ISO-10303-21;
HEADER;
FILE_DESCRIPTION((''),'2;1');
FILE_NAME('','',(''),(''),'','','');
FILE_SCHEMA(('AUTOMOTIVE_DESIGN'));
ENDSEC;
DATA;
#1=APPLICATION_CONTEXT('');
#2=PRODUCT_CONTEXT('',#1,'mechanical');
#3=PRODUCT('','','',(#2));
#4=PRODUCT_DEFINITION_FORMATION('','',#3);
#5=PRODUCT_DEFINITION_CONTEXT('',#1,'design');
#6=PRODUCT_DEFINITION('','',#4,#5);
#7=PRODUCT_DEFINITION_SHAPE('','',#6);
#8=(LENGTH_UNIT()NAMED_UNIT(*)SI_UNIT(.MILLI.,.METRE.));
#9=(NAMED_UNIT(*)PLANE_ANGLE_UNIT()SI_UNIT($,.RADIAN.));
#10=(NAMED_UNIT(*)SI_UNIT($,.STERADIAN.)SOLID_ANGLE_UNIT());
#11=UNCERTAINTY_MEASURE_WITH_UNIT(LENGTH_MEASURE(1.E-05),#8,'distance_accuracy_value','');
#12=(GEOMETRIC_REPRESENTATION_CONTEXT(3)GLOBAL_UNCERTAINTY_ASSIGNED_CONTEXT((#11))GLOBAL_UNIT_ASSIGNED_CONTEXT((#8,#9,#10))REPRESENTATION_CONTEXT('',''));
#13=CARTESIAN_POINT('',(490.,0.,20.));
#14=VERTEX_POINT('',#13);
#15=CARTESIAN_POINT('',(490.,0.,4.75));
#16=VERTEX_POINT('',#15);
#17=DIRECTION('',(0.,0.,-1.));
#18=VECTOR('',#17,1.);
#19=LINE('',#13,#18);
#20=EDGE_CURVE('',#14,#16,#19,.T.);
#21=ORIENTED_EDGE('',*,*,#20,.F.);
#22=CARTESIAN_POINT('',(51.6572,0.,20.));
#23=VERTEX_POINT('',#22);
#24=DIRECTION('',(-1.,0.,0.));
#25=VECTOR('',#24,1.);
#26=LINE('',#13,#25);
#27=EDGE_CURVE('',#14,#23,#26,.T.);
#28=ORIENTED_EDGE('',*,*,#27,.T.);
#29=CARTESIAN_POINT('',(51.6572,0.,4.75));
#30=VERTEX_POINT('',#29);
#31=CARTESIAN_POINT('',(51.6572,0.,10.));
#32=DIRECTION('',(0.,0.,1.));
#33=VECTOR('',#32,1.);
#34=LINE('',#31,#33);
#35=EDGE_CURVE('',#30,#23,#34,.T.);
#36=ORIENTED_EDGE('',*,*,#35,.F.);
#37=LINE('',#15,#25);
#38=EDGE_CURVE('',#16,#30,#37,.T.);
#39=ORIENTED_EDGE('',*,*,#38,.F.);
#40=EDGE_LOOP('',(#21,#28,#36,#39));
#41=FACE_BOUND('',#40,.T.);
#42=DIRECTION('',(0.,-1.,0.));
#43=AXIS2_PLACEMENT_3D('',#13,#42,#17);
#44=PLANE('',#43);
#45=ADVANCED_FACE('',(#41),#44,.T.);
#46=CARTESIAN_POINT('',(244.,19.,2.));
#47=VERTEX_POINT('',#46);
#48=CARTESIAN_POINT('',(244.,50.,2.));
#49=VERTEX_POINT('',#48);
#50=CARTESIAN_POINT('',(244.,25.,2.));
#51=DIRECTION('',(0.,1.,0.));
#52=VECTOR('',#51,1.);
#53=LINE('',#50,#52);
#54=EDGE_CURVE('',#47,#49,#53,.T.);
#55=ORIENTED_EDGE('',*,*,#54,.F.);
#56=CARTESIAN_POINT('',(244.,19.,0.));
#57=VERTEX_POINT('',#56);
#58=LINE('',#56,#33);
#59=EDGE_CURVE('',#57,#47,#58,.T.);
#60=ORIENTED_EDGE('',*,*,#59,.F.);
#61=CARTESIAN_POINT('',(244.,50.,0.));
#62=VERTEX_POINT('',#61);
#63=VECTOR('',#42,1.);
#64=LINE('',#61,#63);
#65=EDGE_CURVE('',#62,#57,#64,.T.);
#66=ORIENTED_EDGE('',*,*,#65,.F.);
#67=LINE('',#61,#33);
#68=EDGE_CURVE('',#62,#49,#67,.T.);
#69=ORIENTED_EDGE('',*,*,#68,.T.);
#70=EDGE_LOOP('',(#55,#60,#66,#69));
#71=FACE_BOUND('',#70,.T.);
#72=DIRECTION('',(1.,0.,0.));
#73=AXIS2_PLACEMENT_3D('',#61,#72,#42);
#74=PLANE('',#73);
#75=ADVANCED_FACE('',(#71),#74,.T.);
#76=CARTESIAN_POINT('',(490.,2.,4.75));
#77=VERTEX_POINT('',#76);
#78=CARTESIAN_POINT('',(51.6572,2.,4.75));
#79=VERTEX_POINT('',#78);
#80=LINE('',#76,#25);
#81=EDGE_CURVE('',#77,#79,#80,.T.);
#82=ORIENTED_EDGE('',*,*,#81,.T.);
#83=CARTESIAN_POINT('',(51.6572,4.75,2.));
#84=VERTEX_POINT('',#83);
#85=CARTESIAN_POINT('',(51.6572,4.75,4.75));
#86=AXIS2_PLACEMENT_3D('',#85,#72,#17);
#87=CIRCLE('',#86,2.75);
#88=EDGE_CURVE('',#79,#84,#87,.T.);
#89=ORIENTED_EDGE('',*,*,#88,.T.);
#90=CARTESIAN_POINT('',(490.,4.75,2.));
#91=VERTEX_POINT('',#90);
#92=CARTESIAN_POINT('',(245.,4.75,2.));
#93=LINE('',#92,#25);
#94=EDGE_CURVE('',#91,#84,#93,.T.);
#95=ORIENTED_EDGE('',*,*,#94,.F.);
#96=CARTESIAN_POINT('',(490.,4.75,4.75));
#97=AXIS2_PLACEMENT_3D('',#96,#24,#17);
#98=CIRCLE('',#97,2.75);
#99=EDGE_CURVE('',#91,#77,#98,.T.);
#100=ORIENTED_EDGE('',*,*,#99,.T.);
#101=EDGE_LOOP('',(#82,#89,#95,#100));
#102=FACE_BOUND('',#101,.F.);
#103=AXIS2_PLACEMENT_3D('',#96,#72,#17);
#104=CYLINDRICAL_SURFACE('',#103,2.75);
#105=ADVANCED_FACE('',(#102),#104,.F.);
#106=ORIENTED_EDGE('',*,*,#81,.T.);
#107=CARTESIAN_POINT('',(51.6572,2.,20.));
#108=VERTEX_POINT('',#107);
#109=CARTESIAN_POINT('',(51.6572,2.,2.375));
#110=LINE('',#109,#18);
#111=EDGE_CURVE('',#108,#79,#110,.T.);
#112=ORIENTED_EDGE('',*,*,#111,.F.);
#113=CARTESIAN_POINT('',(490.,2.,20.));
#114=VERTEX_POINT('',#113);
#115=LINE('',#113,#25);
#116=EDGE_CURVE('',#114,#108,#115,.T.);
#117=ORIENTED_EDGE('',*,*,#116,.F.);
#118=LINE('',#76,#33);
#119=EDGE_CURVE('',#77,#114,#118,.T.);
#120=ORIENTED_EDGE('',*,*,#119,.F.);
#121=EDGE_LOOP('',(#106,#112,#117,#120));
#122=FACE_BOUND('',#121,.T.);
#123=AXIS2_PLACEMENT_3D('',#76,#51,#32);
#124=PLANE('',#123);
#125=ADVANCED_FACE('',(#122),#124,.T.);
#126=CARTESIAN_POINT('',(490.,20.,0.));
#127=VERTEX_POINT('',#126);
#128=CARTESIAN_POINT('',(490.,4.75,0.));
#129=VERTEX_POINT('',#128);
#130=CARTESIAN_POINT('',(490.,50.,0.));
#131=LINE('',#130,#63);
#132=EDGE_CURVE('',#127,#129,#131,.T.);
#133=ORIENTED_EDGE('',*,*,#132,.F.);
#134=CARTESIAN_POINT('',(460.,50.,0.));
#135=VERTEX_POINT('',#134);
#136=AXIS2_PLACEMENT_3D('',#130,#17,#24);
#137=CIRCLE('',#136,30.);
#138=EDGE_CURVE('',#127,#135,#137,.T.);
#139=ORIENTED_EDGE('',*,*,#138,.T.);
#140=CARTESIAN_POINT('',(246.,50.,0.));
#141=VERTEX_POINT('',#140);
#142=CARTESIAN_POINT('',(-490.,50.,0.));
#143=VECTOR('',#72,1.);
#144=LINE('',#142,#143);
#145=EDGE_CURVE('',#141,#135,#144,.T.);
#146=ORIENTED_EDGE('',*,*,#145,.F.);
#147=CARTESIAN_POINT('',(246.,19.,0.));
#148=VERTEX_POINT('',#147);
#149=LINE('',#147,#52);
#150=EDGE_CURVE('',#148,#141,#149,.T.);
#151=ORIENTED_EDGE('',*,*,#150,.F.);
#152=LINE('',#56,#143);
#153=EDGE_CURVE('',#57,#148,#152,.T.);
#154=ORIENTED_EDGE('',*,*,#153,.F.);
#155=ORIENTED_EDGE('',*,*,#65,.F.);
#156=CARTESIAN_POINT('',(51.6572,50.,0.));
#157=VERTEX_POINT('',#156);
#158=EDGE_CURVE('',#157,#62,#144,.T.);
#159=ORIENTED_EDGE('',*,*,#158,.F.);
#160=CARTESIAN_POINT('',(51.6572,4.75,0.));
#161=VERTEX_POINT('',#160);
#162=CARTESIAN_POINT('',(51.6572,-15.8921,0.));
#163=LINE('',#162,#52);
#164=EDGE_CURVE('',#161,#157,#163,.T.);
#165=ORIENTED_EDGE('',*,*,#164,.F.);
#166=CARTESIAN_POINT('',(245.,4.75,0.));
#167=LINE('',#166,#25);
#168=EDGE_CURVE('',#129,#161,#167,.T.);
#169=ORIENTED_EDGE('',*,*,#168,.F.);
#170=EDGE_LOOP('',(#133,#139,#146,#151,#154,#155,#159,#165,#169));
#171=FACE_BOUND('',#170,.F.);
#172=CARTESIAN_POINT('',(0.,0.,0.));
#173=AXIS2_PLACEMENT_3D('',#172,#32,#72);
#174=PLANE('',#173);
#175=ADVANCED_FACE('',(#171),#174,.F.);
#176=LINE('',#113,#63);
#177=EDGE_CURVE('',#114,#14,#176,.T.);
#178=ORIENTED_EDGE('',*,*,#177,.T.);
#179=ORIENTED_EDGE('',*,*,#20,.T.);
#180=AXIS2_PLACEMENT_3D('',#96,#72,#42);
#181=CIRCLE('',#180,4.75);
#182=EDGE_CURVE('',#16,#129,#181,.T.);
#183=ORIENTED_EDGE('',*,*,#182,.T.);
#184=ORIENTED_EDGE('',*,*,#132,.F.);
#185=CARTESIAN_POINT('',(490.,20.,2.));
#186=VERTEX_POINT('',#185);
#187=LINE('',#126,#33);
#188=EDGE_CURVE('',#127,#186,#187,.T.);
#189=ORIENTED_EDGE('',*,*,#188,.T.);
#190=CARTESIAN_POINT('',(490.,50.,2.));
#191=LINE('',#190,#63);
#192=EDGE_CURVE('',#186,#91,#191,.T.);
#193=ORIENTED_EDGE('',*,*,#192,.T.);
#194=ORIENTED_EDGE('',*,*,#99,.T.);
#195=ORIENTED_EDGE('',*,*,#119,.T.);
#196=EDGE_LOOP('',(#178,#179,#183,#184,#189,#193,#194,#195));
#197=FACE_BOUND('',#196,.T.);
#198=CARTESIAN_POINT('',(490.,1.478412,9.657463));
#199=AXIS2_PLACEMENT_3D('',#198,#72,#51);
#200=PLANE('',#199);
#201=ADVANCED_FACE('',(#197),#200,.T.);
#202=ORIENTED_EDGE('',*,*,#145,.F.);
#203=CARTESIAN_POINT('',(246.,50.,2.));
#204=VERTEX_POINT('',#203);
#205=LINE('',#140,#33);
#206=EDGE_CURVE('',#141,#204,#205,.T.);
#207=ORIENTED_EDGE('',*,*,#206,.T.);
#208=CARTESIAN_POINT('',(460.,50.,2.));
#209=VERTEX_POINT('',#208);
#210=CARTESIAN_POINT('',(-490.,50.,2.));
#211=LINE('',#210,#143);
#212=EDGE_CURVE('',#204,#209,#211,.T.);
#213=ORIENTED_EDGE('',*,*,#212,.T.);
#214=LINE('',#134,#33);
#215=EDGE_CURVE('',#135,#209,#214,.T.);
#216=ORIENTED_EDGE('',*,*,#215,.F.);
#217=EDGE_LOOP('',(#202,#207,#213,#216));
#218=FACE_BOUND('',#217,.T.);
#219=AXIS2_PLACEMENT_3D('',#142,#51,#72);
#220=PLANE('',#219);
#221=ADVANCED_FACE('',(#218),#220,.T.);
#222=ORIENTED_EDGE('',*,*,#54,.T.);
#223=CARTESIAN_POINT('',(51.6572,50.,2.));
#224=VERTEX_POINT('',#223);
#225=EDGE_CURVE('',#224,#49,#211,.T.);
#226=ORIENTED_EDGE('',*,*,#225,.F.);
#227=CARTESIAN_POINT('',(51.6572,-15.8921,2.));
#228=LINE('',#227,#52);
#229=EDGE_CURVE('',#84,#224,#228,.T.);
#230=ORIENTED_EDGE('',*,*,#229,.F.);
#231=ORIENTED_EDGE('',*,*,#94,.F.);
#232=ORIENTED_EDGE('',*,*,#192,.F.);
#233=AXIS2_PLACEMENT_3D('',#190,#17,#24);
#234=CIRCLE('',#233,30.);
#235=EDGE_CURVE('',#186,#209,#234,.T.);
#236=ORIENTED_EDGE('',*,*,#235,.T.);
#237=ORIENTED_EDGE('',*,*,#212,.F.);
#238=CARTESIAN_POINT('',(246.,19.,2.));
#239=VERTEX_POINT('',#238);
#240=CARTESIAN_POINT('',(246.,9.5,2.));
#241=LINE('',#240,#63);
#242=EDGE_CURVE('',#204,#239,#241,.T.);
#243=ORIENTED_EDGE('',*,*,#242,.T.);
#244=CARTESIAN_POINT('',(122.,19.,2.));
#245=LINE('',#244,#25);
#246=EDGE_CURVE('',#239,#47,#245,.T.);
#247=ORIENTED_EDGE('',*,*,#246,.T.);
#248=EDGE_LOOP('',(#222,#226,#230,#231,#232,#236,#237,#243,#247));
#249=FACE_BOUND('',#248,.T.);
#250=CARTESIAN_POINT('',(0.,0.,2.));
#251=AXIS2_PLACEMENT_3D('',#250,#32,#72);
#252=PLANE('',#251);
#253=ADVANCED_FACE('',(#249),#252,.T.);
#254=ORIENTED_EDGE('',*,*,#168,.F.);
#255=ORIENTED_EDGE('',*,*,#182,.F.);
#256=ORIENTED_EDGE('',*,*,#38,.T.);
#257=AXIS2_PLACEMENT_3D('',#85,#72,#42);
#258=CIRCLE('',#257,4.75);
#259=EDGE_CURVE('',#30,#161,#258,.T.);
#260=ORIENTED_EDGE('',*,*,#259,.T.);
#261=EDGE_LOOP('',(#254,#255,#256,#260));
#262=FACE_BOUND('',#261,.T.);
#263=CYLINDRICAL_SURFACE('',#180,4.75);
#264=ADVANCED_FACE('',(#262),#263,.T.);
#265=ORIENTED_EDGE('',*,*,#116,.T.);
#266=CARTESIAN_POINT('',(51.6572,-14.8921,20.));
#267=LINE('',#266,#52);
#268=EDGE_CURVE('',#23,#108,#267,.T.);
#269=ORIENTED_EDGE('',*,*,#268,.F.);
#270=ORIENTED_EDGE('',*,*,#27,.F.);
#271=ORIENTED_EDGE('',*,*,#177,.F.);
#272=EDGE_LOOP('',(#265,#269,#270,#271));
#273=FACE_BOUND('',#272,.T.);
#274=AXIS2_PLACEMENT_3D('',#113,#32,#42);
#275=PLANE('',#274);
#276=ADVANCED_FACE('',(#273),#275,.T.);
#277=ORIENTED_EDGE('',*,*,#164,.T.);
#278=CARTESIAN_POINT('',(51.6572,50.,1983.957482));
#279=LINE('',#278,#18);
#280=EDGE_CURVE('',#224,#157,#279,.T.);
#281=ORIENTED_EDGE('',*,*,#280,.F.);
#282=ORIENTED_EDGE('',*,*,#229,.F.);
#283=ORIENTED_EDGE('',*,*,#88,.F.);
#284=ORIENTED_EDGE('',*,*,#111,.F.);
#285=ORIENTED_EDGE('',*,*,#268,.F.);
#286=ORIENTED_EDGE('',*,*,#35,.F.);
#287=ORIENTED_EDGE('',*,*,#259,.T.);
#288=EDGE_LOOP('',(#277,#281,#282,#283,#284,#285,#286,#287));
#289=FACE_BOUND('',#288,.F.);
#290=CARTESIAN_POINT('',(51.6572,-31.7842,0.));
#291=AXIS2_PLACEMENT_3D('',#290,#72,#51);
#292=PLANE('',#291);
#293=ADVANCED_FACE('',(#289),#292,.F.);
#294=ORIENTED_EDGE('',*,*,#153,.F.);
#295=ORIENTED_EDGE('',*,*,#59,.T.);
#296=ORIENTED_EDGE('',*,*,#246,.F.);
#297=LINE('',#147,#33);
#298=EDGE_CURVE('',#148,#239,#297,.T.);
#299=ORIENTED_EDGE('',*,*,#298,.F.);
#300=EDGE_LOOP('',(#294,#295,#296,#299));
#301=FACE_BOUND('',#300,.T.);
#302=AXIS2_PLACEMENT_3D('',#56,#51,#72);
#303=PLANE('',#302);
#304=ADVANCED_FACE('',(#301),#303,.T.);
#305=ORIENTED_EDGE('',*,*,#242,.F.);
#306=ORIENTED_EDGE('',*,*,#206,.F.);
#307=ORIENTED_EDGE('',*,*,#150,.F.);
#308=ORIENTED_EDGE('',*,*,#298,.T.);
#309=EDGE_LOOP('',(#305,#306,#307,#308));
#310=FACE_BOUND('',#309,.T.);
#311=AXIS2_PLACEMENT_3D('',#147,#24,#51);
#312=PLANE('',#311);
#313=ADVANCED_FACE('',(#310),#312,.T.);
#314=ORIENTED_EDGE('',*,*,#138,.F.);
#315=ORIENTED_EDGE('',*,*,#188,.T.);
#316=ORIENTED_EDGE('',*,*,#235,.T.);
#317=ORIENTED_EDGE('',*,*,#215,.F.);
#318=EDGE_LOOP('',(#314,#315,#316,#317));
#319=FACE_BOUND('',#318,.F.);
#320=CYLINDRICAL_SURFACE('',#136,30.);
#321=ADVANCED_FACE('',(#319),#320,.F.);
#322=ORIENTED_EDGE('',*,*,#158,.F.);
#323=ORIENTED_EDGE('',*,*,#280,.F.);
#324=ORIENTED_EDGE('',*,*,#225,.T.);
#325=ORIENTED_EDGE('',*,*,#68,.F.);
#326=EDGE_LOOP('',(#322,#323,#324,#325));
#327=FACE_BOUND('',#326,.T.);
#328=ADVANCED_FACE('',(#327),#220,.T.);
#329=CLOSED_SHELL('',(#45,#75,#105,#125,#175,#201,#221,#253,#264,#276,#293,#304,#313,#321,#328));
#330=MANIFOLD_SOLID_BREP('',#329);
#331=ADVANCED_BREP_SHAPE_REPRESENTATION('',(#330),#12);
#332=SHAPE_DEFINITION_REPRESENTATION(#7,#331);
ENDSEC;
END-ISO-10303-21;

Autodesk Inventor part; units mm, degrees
ref_plane "YZ Plane" through (0, 0, 0) normal (1, 0, 0) x (0, 1, 0)
ref_plane "XZ Plane" through (0, 0, 0) normal (0, 1, 0) x (-1, 0, 0)
ref_plane "XY Plane" through (0, 0, 0) normal (0, 0, 1) x (1, 0, 0)
sketch "Sketch1" plane through (0, 0, 0) normal (0, 0, 1) x (1, 0, 0)
  line L0 (-490, 50) -> (490, 50)
  line L1 (490, 50) -> (490, 0)
  line L2 (490, 0) -> (-490, 0)
  line L3 (-490, 0) -> (-490, 50)
  point P0 (0, 0)
  point P1 (0, 0)
  dimension "d0" = 980
  dimension "d1" = 50
extrude "Plate1" add sketch "Sketch1" along normal blind 2
sketch "Sketch2" plane through (490, 2, 0) normal (0, -1, 0) x (1, 0, 0)
  line L0 (-980, 0) -> (0, 0)
  line L1 (0, 0) -> (0, 20)
  line L2 (0, 20) -> (-980, 20)
  line L3 (-980, 20) -> (-980, 0)
edge flange "Flange1" height 20 angle 90 thickness 2 bend radius 2.75 thickness toward (0, -1, 0) relief tear relief width 2 relief depth 1 edges at (0, 0, 2) wall of the first edge with corners at (-490, 2, 0) (490, 2, 0) (490, 2, 20) (-490, 2, 20)
bend "Bend1"
corner "Corner1"
sketch "Sketch5" plane through (0, 0, 0) normal (0, 0, -1) x (-1, 0, 0)
  line L0 (490, 50) -> (-490, 50) projected
  line L1 (490, 0) -> (-490, 0) projected
  circle A0 centre (0, 50) radius 30
  line L2 (-490, 0) -> (-490, 50)
  line L3 (490, 0) -> (490, 50)
  circle A1 centre (-490, 50) radius 30
  circle A2 centre (490, 50) radius 30
  line L4 (-246, 50) -> (-244, 50)
  line L5 (-244, 50) -> (-244, 19)
  line L6 (-244, 19) -> (-246, 19)
  line L7 (-246, 19) -> (-246, 50)
  line L8 (244, 50) -> (246, 50)
  line L9 (246, 50) -> (246, 19)
  line L10 (246, 19) -> (244, 19)
  line L11 (244, 19) -> (244, 50)
  line L12 (0, 50) -> (0, 0) construction
  point P0 (245, 19)
  point P1 (-245, 19)
  point P2 (-490, 20)
  point P3 (-460, 50)
  point P4 (-30, 50)
  point P5 (30, 50)
  point P6 (460, 50)
  point P7 (490, 20)
  point P8 (-244, 50)
  point P9 (246, 50)
  dimension "d33" = 60
  dimension "d34" = 2
  dimension "d35" = 31
  dimension "d36" = 490
extrude "Extrusion1" cut sketch "Sketch5" against normal through all contours L9 L10 L11 L0 | L0 L3 A2 | A0 L0 | L5 L6 L7 L0 | L2 L0 A1 picked at (470.2507, 47.7748) picked at (6.5355, 34.7298) picked at (-470.2507, 47.7748)
sketch "Sketch7" plane through (0, 0, 2) normal (0, 0, 1) x (1, 0, 0)
  line L0 (468.7934, 20.88) -> (468.7934, 8.88) construction
  line L1 (468.7934, 8.88) -> (280.354, 8.88) construction
  line L2 (280.354, 8.88) -> (280.354, 20.88) construction
  line L3 (280.354, 20.88) -> (468.7934, 20.88) construction
  line L4 (-244, 50) -> (-30, 50) projected
  point P0 (0, 0)
  point P1 (-1, 50)
  point P2 (1, 50)
  dimension "d30" = 12
mark "Mark1"
sketch "Sketch8" plane through (0, 0, 0) normal (0, 0, -1) x (-1, 0, 0)
  line L0 (-244, 50) -> (-51.6572, 50)
  line L1 (-51.6572, 50) -> (502.6857, 50)
  line L2 (502.6857, 50) -> (502.6857, -31.7842)
  line L3 (502.6857, -31.7842) -> (-51.6572, -31.7842)
  line L4 (-51.6572, -31.7842) -> (-51.6572, 50)
  point P0 (0, 0)
extrude "Extrusion3" cut sketch "Sketch8" along normal through all both and the other way through all
equation "\"d1\" = Стрингер_7"
equation "\"d2\" = Thickness"
equation "\"d3\" = BendReliefWidth"
equation "\"d4\" = BendReliefDepth"
equation "\"d5\" = MinimumRemnant"
equation "\"d6\" = TransitionRadius"
equation "\"d9\" = BendRadius"
equation "\"d10\" = CornerReliefSize"
equation "\"d11\" = GapSize"
equation "\"d12\" = JacobiRadiusSize"
equation "\"BendReliefWidth\" = Thickness"
equation "\"BendReliefDepth\" = 0.5 * Thickness"
equation "\"CornerReliefSize\" = 4 * Thickness"
equation "\"MinimumRemnant\" = 2 * Thickness"
equation "\"TransitionRadius\" = BendRadius"
equation "\"JacobiRadiusSize\" = BendRadius"
equation "\"GapSize\" = Thickness"
equation "\"Стрингер_7\" = 50"
equation "\"Thickness\" = 2"
equation "\"BendRadius\" = 2.75"
properties part number "MSC 506 !!GNUT' ZERKAL'NO!!" material "Stainless Steel"
